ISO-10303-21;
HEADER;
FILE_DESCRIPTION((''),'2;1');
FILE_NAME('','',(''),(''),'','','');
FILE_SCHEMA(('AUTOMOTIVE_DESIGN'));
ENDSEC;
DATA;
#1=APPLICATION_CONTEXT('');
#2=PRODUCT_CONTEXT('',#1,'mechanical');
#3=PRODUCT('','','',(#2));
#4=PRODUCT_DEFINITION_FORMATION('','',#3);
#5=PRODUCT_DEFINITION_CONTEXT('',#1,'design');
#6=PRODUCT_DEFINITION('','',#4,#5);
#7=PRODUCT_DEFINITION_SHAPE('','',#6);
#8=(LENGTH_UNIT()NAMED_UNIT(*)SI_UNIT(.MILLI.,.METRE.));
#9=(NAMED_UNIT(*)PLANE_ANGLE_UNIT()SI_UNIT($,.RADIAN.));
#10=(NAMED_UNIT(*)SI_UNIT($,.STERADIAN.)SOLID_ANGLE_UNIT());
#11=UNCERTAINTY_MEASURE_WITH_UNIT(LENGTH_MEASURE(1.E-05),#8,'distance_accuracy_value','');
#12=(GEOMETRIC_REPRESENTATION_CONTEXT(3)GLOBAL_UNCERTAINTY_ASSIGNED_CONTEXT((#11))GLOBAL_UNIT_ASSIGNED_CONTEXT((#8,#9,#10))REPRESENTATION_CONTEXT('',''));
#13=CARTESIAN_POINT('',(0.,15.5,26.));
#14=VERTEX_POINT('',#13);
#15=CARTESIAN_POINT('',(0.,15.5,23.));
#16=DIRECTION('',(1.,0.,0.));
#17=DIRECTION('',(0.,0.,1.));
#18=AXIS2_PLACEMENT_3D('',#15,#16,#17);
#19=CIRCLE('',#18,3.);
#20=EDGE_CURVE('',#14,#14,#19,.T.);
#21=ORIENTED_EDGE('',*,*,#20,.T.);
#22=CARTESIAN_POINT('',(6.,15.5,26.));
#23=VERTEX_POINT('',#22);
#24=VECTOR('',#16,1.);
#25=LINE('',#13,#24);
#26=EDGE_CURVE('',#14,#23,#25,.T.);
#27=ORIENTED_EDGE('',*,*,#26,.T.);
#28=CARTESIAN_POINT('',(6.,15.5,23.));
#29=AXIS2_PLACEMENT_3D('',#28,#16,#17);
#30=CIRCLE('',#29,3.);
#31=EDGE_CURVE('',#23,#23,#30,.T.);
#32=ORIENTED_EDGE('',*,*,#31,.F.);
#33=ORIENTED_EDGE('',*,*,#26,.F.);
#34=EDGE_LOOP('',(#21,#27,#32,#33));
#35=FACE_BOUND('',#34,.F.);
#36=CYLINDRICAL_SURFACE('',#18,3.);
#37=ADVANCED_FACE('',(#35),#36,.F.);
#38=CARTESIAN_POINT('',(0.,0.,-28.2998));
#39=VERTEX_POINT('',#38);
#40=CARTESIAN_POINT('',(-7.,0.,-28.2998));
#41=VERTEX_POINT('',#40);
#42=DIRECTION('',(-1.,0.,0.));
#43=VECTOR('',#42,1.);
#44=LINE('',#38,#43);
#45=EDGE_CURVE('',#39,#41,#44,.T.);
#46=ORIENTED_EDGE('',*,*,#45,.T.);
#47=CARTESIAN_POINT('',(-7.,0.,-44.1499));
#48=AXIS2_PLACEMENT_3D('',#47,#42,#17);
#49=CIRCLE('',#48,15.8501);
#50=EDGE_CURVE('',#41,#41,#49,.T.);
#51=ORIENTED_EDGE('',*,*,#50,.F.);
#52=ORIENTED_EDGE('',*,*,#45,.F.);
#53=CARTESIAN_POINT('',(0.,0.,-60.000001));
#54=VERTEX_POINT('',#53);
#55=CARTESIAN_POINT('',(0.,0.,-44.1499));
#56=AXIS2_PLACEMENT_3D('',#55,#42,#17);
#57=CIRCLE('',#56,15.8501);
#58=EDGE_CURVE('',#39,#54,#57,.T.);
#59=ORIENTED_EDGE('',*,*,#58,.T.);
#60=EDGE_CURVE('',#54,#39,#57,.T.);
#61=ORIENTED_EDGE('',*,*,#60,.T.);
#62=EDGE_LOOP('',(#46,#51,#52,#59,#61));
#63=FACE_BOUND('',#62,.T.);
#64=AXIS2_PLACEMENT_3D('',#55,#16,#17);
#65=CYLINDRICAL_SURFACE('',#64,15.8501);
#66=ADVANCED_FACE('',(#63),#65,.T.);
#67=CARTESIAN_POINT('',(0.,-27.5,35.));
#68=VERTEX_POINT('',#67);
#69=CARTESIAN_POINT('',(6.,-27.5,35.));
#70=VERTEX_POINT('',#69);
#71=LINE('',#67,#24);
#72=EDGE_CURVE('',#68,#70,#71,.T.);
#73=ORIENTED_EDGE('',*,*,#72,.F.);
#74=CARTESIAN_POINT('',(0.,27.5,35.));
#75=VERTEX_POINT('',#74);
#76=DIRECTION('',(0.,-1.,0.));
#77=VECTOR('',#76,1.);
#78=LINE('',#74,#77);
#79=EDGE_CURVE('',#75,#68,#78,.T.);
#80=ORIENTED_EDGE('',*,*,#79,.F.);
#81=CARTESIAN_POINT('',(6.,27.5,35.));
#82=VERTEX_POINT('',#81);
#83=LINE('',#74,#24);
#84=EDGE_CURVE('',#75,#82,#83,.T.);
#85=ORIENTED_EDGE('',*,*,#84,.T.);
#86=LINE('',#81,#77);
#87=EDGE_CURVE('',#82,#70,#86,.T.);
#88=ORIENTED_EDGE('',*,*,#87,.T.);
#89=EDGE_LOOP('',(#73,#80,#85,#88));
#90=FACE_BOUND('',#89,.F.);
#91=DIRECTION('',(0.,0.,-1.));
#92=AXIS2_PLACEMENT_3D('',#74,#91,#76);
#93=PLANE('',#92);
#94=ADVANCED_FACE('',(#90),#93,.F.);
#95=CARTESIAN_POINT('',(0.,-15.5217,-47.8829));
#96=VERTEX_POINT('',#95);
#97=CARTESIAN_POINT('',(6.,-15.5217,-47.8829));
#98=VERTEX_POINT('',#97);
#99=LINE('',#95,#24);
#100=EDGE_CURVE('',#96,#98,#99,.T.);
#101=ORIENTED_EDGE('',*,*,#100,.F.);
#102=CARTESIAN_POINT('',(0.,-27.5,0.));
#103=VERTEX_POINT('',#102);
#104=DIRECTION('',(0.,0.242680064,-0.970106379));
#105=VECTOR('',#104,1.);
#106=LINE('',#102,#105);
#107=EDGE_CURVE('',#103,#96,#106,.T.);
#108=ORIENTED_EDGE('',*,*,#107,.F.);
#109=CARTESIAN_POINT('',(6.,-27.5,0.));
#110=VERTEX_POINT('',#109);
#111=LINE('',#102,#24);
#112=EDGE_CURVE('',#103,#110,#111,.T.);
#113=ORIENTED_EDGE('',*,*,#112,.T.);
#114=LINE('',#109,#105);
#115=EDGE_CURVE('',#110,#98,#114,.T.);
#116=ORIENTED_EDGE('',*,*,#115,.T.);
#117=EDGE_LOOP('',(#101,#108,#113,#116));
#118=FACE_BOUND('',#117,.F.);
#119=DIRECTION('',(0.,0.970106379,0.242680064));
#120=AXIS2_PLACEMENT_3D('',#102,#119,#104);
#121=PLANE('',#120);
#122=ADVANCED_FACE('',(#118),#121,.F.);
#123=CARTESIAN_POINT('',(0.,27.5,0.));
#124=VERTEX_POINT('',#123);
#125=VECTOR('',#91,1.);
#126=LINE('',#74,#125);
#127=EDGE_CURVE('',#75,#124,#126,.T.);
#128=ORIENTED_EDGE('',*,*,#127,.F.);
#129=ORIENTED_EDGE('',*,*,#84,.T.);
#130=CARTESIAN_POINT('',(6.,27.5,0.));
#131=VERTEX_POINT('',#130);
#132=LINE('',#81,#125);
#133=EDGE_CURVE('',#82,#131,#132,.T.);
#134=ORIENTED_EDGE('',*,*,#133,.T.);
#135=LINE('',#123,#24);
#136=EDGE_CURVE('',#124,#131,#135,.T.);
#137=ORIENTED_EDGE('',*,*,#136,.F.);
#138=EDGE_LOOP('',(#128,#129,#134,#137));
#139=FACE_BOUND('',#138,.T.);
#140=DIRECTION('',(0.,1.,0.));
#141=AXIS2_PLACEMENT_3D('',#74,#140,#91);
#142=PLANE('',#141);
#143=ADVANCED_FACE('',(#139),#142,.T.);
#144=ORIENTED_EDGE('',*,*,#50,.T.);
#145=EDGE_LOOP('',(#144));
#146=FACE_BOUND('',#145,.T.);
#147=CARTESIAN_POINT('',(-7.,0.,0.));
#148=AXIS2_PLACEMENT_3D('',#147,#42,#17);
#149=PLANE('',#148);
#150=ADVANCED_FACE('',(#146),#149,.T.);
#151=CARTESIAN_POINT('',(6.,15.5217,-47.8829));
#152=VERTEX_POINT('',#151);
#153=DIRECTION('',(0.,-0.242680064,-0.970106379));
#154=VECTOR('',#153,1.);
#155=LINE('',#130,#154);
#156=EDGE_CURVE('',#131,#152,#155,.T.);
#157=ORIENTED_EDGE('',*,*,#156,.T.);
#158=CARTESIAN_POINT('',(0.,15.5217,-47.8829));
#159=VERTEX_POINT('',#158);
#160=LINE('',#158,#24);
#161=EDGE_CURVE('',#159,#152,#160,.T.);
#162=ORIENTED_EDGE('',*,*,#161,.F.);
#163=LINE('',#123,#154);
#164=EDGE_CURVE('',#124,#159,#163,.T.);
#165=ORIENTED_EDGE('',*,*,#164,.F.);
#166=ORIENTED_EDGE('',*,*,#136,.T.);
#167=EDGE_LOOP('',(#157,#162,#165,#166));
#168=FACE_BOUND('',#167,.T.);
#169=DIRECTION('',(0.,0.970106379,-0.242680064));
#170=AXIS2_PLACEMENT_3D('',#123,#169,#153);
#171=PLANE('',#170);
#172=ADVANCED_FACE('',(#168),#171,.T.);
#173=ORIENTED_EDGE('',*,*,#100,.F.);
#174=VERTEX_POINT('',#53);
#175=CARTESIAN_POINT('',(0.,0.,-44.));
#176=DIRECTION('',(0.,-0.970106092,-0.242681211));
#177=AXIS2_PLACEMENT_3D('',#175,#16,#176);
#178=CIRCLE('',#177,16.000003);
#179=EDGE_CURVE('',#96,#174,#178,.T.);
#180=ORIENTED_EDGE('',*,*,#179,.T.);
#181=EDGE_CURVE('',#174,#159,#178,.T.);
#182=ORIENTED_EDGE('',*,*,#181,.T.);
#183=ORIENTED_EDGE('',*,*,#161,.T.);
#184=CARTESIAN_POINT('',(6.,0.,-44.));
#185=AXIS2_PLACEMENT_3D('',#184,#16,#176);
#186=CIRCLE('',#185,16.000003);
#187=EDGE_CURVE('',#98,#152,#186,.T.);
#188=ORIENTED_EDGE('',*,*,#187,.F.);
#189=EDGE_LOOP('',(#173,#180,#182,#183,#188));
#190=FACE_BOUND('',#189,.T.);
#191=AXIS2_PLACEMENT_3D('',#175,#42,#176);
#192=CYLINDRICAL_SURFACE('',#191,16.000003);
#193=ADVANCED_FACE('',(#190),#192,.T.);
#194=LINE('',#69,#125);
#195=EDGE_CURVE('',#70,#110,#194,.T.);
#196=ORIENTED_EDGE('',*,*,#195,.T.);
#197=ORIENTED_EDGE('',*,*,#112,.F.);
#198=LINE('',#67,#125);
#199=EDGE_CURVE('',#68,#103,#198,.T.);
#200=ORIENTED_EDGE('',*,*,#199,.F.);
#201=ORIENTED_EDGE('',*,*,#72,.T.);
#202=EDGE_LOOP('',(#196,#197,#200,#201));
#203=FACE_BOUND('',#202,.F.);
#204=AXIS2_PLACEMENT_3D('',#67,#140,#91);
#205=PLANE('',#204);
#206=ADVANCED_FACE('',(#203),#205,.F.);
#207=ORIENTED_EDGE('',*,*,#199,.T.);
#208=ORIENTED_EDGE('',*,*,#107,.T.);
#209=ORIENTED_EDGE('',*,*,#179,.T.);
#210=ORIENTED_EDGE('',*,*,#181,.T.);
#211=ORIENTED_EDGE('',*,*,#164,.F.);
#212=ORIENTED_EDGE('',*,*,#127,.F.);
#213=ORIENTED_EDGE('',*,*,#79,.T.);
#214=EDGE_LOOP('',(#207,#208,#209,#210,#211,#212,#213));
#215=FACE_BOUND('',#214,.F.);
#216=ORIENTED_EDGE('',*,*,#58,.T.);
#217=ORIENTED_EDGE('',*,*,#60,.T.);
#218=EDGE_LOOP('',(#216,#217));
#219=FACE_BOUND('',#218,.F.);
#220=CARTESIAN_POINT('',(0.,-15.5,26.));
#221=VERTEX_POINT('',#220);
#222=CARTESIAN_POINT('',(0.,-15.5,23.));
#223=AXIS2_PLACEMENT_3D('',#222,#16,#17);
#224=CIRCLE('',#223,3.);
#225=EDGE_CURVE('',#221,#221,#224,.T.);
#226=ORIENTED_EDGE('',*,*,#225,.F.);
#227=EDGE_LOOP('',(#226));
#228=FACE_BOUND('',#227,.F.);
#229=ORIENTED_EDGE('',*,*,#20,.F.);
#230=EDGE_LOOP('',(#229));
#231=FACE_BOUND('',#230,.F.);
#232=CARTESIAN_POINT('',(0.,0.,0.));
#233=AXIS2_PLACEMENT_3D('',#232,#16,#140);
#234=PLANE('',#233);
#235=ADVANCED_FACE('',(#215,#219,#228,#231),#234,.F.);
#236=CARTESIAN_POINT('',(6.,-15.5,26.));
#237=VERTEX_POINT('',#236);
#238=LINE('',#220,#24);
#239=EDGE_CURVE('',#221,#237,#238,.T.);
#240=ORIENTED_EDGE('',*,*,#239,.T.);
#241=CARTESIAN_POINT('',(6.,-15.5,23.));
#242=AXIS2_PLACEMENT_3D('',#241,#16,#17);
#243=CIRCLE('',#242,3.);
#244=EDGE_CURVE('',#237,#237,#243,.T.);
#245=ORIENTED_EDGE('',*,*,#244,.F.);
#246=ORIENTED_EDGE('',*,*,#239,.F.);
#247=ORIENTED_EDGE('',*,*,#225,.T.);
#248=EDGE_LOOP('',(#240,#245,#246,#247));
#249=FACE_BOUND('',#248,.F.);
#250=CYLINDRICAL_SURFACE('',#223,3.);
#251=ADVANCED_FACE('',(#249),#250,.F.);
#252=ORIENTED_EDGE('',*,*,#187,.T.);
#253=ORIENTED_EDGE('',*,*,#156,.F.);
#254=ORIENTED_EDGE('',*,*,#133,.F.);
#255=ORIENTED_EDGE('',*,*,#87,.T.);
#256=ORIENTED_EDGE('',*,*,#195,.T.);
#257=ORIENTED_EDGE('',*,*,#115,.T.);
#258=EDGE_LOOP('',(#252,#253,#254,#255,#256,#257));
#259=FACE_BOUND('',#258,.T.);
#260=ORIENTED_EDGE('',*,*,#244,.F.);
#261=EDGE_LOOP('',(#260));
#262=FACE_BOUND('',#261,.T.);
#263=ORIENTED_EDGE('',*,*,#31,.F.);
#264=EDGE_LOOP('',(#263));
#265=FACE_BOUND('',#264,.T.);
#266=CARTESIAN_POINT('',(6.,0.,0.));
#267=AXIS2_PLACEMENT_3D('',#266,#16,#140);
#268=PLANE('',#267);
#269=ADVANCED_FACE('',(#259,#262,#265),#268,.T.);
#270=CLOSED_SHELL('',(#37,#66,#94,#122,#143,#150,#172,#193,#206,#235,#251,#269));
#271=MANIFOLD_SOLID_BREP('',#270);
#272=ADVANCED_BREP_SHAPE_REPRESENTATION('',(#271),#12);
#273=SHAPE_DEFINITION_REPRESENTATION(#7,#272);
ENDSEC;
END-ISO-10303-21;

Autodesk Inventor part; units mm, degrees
ref_plane "YZ Plane" through (0, 0, 0) normal (1, 0, 0) x (0, 1, 0)
ref_plane "XZ Plane" through (0, 0, 0) normal (0, 1, 0) x (-1, 0, 0)
ref_plane "XY Plane" through (0, 0, 0) normal (0, 0, 1) x (1, 0, 0)
sketch "Sketch1" plane through (0, 0, 0) normal (1, 0, 0) x (0, 1, 0)
  line L0 (27.5, 35) -> (-27.5, 35)
  line L1 (-27.5, 35) -> (-27.5, 0)
  line L2 (-27.5, 0) -> (-15.5217, -47.8829)
  arc A0 (-15.5217, -47.8829) -> (15.5217, -47.8829) centre (0, -44) ccw
  line L3 (27.5, 35) -> (27.5, 0)
  line L4 (27.5, 0) -> (15.5217, -47.8829)
  line L5 (-38.5, 0) -> (38.5, 0) construction
  line L6 (0, -79) -> (0, 54) construction
  circle A1 centre (0, -44) radius 9
  point P0 (0, 0)
  point P1 (0, -60)
  dimension "d0" = 55
  dimension "d1" = 35
  dimension "d2" = 18
  dimension "d3" = 16
  dimension "d4" = 60
extrude "Extrusion1" add sketch "Sketch1" along normal blind 6 contours L3 L4 A0 L2 L1 L0 | A1
sketch "Sketch2" plane through (0, 0, 0) normal (-1, 0, 0) x (0, 0, 1)
  circle A0 centre (-44.1499, 0) radius 15.8501
  arc A1 (-47.8829, 15.5217) -> (-47.8829, -15.5217) centre (-44, 0) ccw construction
  point P0 (0, 0)
extrude "Extrusion2" add sketch "Sketch2" along normal blind 7
hole "Hole1" at (0, 15.5, 23) direction (1, 0, 0) diameter 6 end through all
hole "Hole2" at (0, -15.5, 23) direction (1, 0, 0) diameter 6 end through all
properties part number "collar"
